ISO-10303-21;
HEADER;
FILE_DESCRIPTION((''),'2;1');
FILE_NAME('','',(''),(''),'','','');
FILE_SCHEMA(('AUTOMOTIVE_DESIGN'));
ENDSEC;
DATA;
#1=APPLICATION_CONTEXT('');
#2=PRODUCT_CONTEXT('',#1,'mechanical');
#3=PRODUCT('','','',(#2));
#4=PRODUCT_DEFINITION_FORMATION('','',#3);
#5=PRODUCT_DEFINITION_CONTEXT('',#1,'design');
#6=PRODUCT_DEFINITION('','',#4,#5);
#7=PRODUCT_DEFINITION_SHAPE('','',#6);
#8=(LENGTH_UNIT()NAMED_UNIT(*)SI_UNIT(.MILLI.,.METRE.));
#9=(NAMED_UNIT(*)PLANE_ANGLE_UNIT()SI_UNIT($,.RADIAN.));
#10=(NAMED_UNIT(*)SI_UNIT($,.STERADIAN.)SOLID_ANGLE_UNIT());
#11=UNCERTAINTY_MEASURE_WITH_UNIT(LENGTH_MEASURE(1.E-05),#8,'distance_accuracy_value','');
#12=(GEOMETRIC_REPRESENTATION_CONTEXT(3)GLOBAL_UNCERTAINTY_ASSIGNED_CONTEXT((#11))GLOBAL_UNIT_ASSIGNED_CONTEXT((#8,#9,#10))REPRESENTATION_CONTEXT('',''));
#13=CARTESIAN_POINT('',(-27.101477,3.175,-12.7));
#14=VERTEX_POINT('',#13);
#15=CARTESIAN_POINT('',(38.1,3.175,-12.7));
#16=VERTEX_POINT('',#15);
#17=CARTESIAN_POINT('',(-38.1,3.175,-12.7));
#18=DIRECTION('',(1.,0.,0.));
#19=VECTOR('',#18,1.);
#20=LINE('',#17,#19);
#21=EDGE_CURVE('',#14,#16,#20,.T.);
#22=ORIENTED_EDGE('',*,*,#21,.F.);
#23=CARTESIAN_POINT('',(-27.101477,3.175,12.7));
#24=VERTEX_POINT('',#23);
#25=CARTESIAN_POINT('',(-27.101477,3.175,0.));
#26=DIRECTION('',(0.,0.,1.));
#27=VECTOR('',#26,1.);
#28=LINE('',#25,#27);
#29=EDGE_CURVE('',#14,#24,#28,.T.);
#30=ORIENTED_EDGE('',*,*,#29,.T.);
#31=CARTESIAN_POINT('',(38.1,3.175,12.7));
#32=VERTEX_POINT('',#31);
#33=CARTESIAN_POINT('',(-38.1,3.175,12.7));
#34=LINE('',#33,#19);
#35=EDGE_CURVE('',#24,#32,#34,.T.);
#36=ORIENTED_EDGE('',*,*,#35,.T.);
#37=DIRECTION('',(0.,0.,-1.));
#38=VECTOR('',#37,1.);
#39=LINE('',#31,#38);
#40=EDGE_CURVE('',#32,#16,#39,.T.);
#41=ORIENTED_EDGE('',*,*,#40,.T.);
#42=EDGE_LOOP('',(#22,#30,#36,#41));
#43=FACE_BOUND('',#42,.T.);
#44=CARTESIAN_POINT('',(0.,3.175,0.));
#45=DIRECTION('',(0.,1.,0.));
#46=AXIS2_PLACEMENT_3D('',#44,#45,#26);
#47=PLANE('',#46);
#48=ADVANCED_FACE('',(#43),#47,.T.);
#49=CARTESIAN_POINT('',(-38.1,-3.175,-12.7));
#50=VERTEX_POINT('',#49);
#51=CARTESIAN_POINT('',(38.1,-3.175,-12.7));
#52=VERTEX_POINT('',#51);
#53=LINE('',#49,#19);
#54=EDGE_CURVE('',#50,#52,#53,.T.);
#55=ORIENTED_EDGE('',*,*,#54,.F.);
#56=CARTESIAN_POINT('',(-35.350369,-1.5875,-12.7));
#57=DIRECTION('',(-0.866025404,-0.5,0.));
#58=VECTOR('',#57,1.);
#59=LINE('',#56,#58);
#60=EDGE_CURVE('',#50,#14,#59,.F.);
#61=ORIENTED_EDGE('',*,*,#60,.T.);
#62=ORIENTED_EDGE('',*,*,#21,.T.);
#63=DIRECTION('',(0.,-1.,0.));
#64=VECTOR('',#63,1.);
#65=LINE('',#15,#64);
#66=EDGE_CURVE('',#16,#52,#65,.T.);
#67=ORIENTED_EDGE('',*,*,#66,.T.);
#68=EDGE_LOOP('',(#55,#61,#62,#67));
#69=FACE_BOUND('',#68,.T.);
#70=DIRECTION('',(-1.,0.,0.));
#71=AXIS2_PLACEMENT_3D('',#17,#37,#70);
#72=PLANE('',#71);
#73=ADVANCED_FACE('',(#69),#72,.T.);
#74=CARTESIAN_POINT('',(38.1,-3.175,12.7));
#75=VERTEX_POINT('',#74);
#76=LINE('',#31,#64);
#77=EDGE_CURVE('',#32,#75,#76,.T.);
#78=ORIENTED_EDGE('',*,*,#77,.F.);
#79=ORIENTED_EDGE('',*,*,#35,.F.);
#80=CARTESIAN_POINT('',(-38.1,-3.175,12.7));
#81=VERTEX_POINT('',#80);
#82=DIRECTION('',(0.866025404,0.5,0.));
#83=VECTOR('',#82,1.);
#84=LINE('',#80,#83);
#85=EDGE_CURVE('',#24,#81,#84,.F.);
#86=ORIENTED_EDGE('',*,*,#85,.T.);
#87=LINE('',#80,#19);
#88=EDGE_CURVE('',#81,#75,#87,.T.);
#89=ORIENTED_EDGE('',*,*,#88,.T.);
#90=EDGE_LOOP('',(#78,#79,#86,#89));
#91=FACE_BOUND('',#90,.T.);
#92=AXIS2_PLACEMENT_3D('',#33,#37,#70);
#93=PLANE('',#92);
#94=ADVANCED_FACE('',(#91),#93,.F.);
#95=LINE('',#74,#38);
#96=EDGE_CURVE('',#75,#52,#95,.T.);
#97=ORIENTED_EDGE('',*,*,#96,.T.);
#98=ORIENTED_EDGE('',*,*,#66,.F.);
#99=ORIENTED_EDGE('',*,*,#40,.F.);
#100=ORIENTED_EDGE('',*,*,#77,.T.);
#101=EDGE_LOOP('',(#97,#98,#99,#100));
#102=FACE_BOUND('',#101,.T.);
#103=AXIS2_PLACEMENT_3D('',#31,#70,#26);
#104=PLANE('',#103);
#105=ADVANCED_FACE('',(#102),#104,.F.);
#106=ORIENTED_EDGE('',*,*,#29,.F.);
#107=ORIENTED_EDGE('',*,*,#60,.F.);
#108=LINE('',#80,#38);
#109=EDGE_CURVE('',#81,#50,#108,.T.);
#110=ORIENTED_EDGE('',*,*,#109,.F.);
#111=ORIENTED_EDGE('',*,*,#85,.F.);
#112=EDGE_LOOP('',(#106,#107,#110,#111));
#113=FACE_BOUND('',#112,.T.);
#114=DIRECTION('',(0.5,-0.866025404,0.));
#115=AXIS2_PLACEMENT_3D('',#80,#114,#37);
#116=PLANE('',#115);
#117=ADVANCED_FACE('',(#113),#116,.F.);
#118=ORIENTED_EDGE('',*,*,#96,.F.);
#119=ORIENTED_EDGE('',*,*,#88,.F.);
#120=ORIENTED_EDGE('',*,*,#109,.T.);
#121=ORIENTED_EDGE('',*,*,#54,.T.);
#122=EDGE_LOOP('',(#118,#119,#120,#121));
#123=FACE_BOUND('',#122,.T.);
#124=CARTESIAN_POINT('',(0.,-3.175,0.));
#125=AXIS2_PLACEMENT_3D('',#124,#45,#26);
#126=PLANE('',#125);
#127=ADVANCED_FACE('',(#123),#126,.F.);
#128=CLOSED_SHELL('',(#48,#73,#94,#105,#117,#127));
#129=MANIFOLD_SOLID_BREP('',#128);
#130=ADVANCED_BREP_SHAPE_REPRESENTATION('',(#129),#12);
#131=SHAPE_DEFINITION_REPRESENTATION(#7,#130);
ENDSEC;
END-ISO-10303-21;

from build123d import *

# Parameters (mm, degrees)
SKETCH1_W           = 76.2
SKETCH1_H           = 25.4
BOSS_EXTRUDE1_DEPTH = 3.175
CHAMFER8_SIZE2      = 10.998522628
CHAMFER8_SIZE       = 6.35


with BuildPart() as part:
    # Sketch1 → Boss-Extrude1 (new, symmetric)
    with BuildSketch(Plane(origin=(0, 0, 0), x_dir=(1, 0, 0), z_dir=(0, 1, 0))):
        Rectangle(SKETCH1_W, SKETCH1_H)
    extrude(amount=BOSS_EXTRUDE1_DEPTH, both=True)

    # Chamfer8
    chamfer8_edges = [part.edges().sort_by_distance(p)[0] for p in [
        (-38.1, 3.175, 0),
    ]]
    chamfer8_side = [part.faces().sort_by_distance(p)[0] for p in [
        (-38.1, 3.048, 0),
    ]]
    chamfer(chamfer8_edges, length=CHAMFER8_SIZE - 0.0001, length2=CHAMFER8_SIZE2 - 0.0001, reference=chamfer8_side[0])  # a hair under: the kernel refuses the full size


solid = part.part
